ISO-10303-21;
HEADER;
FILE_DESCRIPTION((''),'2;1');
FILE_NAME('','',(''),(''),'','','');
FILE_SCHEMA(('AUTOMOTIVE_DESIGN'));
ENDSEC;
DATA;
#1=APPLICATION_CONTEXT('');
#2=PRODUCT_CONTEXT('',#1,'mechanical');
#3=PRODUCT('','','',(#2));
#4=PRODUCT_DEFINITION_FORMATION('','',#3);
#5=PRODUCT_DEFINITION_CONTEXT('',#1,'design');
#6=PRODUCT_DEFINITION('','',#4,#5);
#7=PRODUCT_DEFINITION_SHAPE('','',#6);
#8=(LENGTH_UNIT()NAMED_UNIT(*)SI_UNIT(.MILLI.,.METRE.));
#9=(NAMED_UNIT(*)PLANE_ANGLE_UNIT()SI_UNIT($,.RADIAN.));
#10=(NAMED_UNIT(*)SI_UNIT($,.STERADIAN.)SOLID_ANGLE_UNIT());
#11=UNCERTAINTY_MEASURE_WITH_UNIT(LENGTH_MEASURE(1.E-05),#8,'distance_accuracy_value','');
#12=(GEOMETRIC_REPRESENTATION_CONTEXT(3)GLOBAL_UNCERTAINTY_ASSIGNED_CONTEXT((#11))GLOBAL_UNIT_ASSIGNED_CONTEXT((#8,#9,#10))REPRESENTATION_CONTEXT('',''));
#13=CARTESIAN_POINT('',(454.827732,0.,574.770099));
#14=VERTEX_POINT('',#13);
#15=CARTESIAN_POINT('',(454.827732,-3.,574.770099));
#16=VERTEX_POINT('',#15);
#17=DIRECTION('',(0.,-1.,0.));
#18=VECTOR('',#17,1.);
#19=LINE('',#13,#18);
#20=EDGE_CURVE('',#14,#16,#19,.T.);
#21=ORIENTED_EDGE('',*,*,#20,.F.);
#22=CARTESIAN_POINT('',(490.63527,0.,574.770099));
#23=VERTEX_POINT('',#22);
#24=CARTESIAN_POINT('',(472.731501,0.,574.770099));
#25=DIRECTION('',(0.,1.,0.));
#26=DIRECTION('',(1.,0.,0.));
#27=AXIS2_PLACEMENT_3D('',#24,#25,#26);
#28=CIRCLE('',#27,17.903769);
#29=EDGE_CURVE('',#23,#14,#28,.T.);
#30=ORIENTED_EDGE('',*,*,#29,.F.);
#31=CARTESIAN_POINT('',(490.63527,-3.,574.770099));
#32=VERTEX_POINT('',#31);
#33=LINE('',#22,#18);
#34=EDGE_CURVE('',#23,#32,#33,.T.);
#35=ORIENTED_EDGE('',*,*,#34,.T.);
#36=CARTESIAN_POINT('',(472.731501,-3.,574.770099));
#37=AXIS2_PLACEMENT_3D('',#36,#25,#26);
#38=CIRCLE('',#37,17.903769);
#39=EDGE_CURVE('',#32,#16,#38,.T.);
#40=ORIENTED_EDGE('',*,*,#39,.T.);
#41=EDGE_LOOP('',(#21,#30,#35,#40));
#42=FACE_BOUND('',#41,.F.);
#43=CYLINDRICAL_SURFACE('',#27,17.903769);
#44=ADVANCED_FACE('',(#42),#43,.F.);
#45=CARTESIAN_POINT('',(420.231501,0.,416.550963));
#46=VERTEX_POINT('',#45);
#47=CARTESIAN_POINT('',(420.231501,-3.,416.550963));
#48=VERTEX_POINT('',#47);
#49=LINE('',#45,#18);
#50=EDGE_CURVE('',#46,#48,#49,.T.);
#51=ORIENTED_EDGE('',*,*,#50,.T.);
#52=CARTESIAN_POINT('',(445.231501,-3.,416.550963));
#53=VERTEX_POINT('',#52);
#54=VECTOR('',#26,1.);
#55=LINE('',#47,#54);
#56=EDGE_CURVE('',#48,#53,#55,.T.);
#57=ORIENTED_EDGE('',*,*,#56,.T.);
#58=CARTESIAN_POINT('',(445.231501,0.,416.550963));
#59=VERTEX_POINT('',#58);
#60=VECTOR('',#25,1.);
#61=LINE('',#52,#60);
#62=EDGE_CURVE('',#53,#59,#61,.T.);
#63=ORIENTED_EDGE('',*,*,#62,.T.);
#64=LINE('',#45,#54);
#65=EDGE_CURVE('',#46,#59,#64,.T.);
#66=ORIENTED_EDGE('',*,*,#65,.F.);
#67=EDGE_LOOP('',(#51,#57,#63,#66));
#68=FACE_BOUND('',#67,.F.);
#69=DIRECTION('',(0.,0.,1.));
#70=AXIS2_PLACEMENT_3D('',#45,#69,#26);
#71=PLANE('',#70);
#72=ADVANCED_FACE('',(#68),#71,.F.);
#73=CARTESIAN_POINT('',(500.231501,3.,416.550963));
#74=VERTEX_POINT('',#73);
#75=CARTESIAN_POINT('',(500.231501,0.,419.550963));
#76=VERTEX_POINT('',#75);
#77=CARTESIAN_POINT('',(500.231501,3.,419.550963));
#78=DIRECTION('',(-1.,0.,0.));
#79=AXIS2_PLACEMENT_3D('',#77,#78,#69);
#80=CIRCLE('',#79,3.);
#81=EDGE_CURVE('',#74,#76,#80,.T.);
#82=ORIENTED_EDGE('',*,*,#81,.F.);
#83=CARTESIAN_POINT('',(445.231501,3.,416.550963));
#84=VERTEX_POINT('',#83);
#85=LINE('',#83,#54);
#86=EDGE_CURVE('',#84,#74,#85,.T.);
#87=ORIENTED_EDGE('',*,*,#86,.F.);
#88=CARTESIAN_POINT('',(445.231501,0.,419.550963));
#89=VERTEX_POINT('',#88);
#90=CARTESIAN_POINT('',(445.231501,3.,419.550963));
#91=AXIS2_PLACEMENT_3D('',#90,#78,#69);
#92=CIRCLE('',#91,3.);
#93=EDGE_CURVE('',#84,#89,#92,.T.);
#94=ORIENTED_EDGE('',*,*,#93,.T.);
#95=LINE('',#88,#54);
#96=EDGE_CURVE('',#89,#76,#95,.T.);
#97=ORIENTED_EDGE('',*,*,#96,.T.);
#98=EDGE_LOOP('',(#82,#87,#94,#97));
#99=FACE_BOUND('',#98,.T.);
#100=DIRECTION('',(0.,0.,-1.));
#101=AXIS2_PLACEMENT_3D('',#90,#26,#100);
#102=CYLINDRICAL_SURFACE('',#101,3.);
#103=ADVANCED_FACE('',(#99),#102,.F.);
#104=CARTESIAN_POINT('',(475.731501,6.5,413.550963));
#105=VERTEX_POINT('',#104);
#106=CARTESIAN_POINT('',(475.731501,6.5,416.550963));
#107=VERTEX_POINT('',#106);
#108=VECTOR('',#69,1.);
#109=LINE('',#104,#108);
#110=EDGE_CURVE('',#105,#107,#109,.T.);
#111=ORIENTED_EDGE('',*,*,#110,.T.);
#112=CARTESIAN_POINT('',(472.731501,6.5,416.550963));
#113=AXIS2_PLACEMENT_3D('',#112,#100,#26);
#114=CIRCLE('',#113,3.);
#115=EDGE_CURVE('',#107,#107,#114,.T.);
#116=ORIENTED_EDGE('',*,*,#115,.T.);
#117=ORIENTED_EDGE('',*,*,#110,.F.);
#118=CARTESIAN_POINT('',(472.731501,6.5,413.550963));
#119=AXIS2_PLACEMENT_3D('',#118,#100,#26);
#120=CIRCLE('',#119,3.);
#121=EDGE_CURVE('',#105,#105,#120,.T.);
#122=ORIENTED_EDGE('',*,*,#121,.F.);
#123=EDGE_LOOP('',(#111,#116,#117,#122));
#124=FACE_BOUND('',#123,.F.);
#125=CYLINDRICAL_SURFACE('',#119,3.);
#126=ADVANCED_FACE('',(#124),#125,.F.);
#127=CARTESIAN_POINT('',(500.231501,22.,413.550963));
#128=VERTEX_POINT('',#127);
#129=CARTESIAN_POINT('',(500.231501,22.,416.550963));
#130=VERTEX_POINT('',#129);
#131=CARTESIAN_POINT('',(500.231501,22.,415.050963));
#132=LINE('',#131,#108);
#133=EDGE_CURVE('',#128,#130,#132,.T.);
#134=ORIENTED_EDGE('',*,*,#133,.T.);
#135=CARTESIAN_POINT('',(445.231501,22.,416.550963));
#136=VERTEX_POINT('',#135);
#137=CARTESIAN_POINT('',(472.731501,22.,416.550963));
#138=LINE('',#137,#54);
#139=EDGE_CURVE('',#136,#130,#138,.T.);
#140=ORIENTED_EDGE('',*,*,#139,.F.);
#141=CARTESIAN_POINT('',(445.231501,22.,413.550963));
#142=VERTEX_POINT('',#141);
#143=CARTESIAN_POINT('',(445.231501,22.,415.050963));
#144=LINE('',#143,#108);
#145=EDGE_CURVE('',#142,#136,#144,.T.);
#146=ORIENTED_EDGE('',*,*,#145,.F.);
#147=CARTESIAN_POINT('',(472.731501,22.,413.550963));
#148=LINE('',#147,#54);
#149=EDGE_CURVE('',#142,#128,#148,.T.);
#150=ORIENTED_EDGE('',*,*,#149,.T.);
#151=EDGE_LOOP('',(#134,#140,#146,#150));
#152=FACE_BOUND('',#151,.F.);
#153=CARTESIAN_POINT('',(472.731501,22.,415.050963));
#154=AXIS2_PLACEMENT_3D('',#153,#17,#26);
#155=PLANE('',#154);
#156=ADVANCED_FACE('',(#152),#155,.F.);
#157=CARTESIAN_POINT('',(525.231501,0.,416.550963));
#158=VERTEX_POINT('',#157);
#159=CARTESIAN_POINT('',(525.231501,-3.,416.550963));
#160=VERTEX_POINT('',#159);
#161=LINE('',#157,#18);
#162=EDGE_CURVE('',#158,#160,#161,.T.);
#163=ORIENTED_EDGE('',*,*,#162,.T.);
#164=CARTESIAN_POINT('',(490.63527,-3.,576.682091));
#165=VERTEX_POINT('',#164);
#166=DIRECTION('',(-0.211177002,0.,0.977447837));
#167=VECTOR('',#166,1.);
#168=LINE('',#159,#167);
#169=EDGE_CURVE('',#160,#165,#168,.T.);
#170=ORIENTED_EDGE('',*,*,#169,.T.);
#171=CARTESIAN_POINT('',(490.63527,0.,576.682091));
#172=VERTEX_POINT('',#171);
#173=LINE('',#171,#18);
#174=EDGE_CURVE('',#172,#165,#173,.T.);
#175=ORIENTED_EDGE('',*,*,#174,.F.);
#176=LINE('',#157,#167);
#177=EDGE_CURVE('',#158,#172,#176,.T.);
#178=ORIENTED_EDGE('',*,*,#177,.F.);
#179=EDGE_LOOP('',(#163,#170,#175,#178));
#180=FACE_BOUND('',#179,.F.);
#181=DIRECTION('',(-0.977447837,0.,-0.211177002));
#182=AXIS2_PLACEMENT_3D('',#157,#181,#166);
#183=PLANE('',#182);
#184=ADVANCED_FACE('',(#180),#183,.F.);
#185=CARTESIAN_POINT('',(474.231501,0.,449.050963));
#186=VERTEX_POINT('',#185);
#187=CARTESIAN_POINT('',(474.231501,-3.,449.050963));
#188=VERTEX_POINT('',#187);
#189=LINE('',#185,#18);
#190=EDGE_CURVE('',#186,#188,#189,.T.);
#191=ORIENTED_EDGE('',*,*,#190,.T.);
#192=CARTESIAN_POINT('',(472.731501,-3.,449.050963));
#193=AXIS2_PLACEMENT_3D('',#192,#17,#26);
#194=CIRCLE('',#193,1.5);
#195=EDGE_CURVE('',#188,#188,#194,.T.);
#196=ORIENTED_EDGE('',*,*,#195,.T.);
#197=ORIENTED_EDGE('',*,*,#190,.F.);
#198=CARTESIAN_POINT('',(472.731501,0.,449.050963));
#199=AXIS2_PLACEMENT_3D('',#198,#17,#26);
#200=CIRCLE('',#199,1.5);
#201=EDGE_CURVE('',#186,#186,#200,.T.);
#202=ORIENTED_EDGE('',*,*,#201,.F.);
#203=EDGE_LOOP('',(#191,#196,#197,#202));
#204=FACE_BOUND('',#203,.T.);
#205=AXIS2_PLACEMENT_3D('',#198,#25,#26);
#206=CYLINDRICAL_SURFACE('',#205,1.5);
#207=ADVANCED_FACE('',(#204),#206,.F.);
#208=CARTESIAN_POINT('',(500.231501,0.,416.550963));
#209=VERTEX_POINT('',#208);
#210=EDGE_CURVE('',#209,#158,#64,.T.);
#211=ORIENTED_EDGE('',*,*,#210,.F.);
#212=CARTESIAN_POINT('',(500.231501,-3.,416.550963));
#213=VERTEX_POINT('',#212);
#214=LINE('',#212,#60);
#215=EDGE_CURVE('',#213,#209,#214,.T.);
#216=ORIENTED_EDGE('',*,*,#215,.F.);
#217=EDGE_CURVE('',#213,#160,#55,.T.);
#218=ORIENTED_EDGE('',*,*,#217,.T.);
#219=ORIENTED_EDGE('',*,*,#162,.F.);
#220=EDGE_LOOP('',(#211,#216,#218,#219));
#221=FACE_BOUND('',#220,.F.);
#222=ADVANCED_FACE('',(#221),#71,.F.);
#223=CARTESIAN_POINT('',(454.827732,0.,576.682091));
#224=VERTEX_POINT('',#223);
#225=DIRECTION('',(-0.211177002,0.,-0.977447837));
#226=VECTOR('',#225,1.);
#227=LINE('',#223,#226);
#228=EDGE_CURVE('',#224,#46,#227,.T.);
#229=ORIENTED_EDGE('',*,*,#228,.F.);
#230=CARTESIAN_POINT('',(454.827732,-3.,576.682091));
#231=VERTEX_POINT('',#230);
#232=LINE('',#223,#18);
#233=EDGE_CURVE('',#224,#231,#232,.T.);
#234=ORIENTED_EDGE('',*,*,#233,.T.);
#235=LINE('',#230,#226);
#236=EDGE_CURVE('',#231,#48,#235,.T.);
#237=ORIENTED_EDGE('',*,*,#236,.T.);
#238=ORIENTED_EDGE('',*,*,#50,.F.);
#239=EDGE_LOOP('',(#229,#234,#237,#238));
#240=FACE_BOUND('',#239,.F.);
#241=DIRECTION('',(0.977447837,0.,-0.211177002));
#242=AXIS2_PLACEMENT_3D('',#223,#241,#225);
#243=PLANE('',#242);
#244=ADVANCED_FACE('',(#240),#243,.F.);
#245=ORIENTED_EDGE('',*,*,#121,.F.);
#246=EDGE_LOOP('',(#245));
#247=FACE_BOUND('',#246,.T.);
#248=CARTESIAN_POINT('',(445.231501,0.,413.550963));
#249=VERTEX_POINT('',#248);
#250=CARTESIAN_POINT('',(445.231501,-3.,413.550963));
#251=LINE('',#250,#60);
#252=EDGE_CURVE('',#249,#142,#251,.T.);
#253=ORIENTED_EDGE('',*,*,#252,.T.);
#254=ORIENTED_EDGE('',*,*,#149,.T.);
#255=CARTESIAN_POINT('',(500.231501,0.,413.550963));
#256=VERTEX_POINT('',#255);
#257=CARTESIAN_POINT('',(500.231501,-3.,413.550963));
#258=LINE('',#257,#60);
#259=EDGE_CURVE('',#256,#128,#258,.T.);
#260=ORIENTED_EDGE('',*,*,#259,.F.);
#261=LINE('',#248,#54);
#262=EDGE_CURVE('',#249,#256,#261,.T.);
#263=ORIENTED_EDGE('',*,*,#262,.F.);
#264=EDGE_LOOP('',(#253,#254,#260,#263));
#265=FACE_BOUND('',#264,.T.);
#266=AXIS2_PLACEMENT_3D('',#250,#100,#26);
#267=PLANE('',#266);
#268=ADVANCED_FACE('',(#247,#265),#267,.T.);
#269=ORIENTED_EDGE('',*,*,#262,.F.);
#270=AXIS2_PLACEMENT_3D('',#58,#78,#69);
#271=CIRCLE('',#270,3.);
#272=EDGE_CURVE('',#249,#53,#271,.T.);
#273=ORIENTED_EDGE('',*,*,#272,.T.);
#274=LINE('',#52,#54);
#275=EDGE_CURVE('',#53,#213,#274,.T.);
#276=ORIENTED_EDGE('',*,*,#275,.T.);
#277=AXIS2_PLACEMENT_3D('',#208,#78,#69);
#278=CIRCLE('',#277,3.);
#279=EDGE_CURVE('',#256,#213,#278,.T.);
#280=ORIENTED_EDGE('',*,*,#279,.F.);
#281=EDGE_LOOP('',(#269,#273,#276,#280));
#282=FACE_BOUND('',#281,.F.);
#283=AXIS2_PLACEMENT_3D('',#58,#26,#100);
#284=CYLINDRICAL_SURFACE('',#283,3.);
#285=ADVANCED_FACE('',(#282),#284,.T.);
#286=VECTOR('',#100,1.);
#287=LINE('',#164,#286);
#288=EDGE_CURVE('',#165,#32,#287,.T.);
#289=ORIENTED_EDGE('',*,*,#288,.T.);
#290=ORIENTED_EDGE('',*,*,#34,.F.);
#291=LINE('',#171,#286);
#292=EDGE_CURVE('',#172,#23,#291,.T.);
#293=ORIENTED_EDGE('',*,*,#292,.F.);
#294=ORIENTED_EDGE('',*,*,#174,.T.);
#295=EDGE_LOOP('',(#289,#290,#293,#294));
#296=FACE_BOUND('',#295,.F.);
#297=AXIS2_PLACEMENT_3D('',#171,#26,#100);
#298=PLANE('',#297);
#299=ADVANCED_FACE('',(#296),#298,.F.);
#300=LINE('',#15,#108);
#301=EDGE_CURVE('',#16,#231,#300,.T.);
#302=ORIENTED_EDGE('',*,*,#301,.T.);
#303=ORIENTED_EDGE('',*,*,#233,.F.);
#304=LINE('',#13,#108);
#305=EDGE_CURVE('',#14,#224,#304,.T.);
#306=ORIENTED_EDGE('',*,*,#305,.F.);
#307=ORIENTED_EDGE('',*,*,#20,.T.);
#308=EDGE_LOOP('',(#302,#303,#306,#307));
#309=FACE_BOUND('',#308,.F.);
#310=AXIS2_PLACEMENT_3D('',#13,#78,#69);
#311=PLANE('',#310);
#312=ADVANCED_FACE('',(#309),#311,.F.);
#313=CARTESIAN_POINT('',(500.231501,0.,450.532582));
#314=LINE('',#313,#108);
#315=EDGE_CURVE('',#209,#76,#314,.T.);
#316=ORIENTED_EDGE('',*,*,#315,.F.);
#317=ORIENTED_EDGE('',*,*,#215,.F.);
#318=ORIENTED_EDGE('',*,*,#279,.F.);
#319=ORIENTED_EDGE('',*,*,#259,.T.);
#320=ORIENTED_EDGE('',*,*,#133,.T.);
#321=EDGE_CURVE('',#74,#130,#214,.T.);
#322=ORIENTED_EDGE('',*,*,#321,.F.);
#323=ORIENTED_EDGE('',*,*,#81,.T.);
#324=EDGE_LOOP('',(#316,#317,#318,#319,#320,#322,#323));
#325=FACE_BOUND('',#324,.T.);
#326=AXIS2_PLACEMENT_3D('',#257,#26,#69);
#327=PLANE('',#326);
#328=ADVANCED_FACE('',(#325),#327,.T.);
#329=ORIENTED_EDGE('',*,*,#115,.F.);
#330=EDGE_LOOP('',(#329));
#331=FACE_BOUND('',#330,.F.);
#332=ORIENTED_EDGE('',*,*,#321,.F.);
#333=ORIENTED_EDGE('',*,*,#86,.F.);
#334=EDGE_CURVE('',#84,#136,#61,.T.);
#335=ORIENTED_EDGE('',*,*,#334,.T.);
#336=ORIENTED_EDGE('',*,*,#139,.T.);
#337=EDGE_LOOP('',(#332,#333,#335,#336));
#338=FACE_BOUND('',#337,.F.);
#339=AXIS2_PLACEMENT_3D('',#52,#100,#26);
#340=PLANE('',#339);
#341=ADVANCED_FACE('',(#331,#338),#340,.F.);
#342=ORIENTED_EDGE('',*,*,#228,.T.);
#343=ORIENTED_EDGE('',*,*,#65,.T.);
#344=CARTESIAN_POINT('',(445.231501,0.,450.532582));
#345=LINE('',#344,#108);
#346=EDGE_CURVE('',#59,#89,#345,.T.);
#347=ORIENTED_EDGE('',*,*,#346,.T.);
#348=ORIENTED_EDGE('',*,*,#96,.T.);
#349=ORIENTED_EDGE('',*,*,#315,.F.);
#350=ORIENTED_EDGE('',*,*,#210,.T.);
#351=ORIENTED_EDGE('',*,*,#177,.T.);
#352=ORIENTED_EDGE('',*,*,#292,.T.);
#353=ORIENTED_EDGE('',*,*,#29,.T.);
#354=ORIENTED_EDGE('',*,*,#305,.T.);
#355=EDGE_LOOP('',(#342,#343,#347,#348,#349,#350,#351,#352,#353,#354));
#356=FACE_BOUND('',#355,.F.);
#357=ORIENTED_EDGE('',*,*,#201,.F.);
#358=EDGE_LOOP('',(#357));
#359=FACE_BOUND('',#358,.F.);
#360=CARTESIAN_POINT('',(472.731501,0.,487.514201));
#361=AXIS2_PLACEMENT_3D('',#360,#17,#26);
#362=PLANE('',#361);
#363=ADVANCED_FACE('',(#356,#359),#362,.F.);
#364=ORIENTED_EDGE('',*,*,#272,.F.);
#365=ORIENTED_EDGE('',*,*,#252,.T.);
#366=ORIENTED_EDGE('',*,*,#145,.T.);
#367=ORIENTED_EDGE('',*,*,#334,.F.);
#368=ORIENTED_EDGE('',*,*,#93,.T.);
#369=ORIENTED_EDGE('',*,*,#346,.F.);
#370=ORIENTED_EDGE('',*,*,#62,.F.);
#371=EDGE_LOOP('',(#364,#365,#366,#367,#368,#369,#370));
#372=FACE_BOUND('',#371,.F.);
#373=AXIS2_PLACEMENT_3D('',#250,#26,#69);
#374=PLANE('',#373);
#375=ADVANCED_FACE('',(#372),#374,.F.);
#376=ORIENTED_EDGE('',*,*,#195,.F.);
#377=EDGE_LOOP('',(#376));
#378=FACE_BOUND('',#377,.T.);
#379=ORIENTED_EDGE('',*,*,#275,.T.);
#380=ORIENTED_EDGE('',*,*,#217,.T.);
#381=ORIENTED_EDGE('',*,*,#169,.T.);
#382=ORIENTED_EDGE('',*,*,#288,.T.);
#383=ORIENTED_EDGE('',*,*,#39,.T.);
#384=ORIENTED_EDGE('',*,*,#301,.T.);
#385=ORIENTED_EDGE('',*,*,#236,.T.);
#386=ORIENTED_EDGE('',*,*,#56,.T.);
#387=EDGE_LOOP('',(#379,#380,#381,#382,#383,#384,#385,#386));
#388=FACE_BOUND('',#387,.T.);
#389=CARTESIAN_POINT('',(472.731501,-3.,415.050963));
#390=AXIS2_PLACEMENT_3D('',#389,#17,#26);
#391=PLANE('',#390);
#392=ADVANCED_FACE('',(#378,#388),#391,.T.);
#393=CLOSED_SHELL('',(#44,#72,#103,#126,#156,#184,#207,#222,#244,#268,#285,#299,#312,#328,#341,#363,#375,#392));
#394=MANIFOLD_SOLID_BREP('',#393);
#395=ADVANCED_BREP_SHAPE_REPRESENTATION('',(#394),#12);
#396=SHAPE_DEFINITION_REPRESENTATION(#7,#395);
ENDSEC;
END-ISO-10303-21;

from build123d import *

# Parameters (mm, degrees)
F0_R     = 1.5
F1_DEPTH = 3
F2_W     = 55
F2_H     = 3
F3_DEPTH = 25
F4_R     = 3
F5_R     = 3
F6_DEPTH = 163.1321276775


with BuildPart() as f1:
    # F0 (on Front) → F1 (new body)
    with BuildSketch(Plane.XZ):
        with BuildLine():
            Line((454.8277321524, 574.7700988736), (454.8277321524, 576.6820907487))
            Line((454.8277321524, 576.6820907487), (420.231500864, 416.5509630712))
            Line((420.231500864, 416.5509630712), (495.9500458773, 416.5509630712))
            Line((495.9500458773, 416.5509630712), (525.231500864, 416.5509630712))
            Line((525.231500864, 416.5509630712), (490.6352695757, 576.6820907487))
            Line((490.6352695757, 576.6820907487), (490.6352695757, 574.7700988736))
            ThreePointArc((490.6352695757, 574.7700988736), (472.731500864, 556.866330162), (454.8277321524, 574.7700988736))
        make_face()
        with Locations((472.731500864, 449.0509630712)):
            Circle(F0_R, mode=Mode.SUBTRACT)
    extrude(amount=F1_DEPTH)

    # F2 (on face) → F3 (join)
    with BuildSketch(Plane.XZ.offset(3)):
        with Locations((472.731500864, 415.0509630712)):
            Rectangle(F2_W, F2_H)
    extrude(amount=-F3_DEPTH)

    # F4
    f4_edges = [f1.edges().sort_by_distance(p)[0] for p in [
        (472.731501, -3, 413.550963),
        (472.731501, 0, 416.550963),
    ]]
    fillet(f4_edges, radius=F4_R)

    # F5 (on face) → F6 (cut, through all)
    with BuildSketch(Plane(origin=(0, 0, 413.5509630712), x_dir=(1, 0, 0), z_dir=(0, 0, -1))):
        with Locations((472.731500864, -6.5)):
            Circle(F5_R)
    extrude(amount=-F6_DEPTH, mode=Mode.SUBTRACT)


solid = f1.part
